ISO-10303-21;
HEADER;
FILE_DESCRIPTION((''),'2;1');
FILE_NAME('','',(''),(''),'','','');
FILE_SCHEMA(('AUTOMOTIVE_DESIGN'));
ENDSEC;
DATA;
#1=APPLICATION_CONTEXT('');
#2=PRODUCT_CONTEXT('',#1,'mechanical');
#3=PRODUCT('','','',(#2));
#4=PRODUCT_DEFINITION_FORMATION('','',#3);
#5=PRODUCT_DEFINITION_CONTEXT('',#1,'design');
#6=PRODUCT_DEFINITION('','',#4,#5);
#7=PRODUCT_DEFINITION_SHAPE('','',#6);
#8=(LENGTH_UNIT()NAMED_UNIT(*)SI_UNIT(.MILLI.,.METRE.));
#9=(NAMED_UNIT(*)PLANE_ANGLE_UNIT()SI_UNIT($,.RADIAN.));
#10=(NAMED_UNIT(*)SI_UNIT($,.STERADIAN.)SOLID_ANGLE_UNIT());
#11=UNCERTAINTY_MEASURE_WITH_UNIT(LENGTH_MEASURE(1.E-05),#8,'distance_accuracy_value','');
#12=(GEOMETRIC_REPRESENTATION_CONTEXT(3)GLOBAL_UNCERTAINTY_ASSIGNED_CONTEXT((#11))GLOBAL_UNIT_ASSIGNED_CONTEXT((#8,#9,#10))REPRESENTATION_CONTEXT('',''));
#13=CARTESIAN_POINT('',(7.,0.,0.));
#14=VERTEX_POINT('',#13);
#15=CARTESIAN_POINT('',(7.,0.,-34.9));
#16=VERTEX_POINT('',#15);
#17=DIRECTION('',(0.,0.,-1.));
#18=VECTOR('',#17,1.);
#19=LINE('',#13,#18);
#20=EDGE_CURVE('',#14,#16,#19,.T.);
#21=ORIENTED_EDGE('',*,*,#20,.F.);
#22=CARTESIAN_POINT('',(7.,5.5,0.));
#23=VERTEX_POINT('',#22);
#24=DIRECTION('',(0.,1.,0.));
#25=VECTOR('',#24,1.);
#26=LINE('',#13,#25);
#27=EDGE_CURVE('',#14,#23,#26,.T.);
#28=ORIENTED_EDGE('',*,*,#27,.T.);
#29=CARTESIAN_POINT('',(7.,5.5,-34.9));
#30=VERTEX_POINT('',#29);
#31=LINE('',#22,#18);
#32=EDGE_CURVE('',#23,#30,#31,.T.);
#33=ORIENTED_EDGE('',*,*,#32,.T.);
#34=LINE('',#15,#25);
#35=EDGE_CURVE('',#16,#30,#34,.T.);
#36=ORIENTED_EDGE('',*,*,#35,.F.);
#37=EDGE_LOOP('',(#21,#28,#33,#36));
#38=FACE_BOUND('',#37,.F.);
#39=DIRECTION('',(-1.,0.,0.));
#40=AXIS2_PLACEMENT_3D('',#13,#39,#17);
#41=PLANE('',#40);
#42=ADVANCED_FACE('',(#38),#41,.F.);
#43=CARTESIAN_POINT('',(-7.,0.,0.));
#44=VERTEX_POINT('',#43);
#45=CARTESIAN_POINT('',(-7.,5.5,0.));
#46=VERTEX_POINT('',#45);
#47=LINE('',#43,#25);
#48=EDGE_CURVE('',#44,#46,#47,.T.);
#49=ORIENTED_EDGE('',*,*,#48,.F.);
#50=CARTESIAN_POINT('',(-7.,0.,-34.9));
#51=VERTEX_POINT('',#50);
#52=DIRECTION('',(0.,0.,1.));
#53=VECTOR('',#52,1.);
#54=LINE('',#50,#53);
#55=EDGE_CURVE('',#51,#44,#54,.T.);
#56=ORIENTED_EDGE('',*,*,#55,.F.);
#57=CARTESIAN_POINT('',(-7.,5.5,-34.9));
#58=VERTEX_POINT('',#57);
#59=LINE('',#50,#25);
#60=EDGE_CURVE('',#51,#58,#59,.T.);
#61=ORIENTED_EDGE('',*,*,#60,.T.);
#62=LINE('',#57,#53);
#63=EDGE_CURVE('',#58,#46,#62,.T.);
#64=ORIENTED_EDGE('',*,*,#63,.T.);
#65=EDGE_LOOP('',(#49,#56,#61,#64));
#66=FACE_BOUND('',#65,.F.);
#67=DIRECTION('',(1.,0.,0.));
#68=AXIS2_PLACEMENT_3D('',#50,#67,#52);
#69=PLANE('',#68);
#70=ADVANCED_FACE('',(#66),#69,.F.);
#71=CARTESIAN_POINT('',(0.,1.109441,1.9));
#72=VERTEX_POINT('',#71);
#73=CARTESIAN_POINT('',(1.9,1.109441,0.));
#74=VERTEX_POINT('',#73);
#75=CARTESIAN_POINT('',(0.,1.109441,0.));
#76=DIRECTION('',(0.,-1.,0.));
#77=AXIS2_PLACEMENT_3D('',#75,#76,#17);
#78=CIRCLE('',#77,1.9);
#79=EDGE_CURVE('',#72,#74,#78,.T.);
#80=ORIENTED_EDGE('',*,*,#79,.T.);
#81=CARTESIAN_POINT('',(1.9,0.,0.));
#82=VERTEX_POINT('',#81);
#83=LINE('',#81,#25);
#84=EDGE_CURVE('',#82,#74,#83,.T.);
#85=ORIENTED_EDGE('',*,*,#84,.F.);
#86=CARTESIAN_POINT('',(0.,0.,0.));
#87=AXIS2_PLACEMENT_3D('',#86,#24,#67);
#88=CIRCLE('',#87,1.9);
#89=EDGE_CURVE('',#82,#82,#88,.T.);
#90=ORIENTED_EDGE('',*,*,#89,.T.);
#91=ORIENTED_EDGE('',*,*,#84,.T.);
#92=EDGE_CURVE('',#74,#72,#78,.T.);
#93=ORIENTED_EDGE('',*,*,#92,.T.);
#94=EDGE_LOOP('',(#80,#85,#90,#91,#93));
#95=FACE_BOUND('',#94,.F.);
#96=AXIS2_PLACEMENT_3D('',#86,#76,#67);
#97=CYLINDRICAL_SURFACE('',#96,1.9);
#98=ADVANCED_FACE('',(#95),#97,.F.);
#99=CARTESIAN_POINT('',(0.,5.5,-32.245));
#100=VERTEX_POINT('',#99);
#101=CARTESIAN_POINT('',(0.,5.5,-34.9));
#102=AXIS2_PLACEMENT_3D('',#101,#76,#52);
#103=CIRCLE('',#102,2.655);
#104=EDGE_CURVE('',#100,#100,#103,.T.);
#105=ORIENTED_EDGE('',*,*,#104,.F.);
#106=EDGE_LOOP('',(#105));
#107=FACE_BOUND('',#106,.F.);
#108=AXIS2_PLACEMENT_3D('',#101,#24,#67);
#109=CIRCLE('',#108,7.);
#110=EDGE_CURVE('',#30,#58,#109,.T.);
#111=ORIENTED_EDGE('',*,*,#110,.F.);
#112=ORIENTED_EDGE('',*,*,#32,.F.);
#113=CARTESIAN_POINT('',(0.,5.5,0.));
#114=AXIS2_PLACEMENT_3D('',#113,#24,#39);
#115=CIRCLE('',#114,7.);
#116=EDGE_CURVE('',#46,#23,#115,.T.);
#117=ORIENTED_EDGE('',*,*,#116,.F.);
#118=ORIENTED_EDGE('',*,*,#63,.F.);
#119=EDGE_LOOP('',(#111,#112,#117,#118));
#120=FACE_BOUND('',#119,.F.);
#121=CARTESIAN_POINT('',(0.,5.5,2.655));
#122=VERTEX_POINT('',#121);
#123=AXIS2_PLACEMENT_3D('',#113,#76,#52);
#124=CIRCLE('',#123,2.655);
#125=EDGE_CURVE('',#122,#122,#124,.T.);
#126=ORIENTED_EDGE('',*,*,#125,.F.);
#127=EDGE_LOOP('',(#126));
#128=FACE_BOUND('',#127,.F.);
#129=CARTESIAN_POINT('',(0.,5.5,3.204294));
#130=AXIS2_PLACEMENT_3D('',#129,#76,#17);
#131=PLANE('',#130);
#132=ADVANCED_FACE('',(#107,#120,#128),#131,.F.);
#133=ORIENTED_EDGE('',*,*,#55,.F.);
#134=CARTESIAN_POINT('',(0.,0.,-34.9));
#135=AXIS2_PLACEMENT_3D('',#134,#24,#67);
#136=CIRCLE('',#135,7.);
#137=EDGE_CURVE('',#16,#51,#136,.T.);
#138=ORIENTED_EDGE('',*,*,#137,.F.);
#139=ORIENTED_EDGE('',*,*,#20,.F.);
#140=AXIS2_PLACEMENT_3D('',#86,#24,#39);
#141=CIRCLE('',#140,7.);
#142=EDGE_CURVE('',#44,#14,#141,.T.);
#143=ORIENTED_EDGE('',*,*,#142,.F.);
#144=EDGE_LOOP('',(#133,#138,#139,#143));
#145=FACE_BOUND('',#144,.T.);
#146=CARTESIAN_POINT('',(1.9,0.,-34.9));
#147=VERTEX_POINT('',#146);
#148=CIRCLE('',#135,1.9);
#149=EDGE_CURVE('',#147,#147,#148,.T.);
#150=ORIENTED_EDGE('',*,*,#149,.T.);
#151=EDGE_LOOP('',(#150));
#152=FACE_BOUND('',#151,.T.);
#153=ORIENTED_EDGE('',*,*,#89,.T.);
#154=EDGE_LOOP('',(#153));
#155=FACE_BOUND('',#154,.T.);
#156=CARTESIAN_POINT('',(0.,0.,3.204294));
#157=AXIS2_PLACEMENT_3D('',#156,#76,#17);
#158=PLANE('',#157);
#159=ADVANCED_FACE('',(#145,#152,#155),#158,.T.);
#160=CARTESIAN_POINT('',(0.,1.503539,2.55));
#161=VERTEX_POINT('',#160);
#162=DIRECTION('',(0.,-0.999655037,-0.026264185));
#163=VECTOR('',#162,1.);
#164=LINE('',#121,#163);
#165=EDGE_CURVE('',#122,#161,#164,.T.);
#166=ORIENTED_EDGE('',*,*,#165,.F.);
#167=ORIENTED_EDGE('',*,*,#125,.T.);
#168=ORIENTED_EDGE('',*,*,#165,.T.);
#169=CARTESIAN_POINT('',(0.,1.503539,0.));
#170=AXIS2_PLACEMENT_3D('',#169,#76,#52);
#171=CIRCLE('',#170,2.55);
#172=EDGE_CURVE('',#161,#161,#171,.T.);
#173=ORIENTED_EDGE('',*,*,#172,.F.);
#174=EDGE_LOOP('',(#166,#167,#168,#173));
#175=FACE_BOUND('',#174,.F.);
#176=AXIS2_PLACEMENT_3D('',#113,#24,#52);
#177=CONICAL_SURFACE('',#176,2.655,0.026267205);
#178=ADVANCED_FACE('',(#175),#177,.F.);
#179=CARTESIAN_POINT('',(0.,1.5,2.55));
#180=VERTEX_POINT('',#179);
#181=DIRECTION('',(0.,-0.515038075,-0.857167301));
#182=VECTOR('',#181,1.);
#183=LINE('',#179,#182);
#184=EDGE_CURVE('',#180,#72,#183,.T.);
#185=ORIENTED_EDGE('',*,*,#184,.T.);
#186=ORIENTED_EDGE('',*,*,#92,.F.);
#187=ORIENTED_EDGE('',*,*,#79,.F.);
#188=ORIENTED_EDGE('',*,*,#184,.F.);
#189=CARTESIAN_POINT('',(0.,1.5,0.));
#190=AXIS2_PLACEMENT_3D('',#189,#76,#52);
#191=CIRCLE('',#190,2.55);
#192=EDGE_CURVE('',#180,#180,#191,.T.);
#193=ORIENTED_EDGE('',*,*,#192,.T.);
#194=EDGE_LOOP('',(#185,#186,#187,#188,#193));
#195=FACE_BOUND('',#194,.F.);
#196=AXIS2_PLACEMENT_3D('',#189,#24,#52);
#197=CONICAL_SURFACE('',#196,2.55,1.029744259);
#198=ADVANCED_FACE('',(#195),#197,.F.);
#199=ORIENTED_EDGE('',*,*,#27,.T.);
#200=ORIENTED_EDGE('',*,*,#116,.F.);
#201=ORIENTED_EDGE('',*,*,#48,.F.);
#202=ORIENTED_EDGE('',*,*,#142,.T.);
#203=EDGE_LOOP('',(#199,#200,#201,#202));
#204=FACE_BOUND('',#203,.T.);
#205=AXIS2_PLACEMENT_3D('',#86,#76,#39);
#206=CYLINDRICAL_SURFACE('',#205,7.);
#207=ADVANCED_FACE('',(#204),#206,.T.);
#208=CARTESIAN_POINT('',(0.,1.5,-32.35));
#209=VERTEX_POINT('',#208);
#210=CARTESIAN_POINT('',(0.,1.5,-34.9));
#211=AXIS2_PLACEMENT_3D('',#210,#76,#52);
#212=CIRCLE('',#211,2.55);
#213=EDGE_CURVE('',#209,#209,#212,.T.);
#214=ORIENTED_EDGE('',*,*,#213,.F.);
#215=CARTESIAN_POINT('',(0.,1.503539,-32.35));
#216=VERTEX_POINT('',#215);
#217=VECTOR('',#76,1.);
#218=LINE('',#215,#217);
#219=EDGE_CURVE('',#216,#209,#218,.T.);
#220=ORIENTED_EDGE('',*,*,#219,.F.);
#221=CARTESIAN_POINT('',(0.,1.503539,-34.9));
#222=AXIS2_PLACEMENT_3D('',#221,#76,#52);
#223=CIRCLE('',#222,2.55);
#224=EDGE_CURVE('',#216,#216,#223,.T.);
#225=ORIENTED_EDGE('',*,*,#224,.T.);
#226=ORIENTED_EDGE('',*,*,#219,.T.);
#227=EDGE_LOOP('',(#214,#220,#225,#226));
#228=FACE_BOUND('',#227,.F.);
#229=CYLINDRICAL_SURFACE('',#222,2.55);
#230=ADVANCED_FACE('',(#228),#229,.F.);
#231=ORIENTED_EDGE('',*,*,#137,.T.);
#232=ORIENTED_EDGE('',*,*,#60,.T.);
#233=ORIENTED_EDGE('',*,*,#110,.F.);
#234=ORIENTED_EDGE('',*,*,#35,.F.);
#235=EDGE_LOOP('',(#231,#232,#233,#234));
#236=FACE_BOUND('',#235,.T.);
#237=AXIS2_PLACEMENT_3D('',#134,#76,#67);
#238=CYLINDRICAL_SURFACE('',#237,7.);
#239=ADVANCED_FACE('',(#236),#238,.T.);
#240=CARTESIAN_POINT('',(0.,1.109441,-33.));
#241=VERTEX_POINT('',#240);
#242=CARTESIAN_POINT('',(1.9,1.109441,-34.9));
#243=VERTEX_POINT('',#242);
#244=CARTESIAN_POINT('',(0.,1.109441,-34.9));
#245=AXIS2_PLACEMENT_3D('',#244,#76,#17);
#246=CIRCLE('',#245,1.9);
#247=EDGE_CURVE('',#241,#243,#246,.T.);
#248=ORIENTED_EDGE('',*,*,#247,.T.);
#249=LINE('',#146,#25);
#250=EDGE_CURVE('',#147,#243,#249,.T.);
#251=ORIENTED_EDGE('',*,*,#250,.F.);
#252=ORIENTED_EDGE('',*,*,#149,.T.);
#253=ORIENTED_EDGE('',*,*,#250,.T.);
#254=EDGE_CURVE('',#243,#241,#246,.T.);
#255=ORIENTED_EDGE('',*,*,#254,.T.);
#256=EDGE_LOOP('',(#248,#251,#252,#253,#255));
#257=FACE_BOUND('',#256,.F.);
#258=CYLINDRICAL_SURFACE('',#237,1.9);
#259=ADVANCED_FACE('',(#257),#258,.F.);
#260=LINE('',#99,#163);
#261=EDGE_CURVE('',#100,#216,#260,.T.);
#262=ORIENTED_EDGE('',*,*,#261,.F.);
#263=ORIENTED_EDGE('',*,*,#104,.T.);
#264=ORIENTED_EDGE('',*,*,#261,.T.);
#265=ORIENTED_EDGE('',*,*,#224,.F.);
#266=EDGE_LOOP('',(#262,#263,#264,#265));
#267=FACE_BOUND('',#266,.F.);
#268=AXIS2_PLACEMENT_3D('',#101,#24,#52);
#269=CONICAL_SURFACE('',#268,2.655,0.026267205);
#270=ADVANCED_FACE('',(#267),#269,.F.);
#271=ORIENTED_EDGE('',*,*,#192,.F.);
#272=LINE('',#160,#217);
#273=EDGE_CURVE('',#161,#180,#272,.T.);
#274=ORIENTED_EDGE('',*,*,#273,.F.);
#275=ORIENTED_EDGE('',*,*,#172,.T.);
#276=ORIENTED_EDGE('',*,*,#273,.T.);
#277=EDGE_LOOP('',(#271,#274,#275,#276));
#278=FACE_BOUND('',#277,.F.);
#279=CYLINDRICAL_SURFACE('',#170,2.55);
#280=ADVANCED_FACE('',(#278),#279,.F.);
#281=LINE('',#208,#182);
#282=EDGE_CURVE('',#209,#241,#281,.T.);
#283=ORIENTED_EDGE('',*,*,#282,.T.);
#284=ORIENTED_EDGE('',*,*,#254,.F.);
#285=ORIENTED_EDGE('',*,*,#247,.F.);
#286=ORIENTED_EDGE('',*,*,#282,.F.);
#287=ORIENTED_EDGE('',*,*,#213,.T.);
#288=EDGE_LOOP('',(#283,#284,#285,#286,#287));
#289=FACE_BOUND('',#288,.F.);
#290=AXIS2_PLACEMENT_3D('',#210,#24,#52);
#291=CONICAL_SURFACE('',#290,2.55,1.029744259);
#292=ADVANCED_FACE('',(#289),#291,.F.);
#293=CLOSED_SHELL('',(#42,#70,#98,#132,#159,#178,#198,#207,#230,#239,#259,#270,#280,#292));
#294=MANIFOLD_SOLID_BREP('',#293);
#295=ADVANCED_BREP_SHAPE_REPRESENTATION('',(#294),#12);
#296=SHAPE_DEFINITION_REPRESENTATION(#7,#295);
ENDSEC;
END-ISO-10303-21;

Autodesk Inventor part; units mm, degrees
ref_plane "YZ Plane" through (0, 0, 0) normal (1, 0, 0) x (0, 1, 0)
ref_plane "XZ Plane" through (0, 0, 0) normal (0, 1, 0) x (-1, 0, 0)
ref_plane "XY Plane" through (0, 0, 0) normal (0, 0, 1) x (1, 0, 0)
sketch "Sketch1" plane through (0, 0, 0) normal (0, 1, 0) x (-1, 0, 0)
  line L0 (0, 0) -> (0, -34.9)
  line L1 (0, 0) -> (-4, 0) construction
  line L2 (0, -34.9) -> (-4, -34.9) construction
  line L3 (0, 0) -> (-5, 0)
  arc A0 (5, 0) -> (-5, 0) centre (0, 0) ccw
  line L4 (-5, 0) -> (-5, -34.9)
  arc A1 (-5, -34.9) -> (5, -34.9) centre (0, -34.9) ccw
  line L5 (5, -34.9) -> (5, 0)
  dimension "d11" = 34.9
  dimension "d12" = 5
  dimension "d13" = 90
  dimension "d14" = 34.9
extrude "Extrusion1" add sketch "Sketch1" along normal blind 5.5
sketch "Sketch2" plane through (0, 5.5, 0) normal (0, 1, 0) x (1, 0, 0)
  circle A0 centre (0, 0) radius 2.655
  line L0 (0, 0) -> (0, 34.9)
  circle A1 centre (0, 34.9) radius 2.655
  dimension "d7" = 5.31
  dimension "d8" = 34.9
  dimension "d9" = 5.31
sketch "Sketch3" plane through (0, 0, 0) normal (0, -1, 0) x (1, 0, 0)
  circle A0 centre (0, 0) radius 1.9
  line L0 (0, 0) -> (0, -34.9)
  circle A1 centre (0, -34.9) radius 1.9
  dimension "d15" = 3.8
  dimension "d16" = 34.9
  dimension "d17" = 3.8
extrude "Extrusion2" cut sketch "Sketch3" against normal blind 1.2
sketch "Sketch4" plane through (0, 1.2, -34.9) normal (0, -1, 0) x (1, 0, 0)
  circle A0 centre (0, 0) radius 1.9 projected
  circle A1 centre (0, 0) radius 1.9
  circle A2 centre (0, 34.9) radius 1.9
sketch "Sketch5" plane through (5, 0, 0) normal (1, 0, 0) x (0, 0, -1)
  line L0 (0, 0) -> (0, 5.5) projected
  line L1 (0, 0) -> (0, 5.5)
hole "Hole1" at (0, 5.5, 0) at (0, 5.5, -34.9) direction (0, -1, 0) diameter 5.1 depth 4 tip angle 118 countersink diameter 5.31 countersink angle 3.01
thicken "Thicken1" operation add thickness 2 both sides no extend neighbours yes toward (-0.9967573, 0, -0.0804666) faces at (-4.9838, 1.8333, -35.3023) (5, 1.8333, -23.2667) (-5, 1.8333, -11.6333) (-4.9838, 3.6667, 0.4023)
properties part number "Rod_constraint"
